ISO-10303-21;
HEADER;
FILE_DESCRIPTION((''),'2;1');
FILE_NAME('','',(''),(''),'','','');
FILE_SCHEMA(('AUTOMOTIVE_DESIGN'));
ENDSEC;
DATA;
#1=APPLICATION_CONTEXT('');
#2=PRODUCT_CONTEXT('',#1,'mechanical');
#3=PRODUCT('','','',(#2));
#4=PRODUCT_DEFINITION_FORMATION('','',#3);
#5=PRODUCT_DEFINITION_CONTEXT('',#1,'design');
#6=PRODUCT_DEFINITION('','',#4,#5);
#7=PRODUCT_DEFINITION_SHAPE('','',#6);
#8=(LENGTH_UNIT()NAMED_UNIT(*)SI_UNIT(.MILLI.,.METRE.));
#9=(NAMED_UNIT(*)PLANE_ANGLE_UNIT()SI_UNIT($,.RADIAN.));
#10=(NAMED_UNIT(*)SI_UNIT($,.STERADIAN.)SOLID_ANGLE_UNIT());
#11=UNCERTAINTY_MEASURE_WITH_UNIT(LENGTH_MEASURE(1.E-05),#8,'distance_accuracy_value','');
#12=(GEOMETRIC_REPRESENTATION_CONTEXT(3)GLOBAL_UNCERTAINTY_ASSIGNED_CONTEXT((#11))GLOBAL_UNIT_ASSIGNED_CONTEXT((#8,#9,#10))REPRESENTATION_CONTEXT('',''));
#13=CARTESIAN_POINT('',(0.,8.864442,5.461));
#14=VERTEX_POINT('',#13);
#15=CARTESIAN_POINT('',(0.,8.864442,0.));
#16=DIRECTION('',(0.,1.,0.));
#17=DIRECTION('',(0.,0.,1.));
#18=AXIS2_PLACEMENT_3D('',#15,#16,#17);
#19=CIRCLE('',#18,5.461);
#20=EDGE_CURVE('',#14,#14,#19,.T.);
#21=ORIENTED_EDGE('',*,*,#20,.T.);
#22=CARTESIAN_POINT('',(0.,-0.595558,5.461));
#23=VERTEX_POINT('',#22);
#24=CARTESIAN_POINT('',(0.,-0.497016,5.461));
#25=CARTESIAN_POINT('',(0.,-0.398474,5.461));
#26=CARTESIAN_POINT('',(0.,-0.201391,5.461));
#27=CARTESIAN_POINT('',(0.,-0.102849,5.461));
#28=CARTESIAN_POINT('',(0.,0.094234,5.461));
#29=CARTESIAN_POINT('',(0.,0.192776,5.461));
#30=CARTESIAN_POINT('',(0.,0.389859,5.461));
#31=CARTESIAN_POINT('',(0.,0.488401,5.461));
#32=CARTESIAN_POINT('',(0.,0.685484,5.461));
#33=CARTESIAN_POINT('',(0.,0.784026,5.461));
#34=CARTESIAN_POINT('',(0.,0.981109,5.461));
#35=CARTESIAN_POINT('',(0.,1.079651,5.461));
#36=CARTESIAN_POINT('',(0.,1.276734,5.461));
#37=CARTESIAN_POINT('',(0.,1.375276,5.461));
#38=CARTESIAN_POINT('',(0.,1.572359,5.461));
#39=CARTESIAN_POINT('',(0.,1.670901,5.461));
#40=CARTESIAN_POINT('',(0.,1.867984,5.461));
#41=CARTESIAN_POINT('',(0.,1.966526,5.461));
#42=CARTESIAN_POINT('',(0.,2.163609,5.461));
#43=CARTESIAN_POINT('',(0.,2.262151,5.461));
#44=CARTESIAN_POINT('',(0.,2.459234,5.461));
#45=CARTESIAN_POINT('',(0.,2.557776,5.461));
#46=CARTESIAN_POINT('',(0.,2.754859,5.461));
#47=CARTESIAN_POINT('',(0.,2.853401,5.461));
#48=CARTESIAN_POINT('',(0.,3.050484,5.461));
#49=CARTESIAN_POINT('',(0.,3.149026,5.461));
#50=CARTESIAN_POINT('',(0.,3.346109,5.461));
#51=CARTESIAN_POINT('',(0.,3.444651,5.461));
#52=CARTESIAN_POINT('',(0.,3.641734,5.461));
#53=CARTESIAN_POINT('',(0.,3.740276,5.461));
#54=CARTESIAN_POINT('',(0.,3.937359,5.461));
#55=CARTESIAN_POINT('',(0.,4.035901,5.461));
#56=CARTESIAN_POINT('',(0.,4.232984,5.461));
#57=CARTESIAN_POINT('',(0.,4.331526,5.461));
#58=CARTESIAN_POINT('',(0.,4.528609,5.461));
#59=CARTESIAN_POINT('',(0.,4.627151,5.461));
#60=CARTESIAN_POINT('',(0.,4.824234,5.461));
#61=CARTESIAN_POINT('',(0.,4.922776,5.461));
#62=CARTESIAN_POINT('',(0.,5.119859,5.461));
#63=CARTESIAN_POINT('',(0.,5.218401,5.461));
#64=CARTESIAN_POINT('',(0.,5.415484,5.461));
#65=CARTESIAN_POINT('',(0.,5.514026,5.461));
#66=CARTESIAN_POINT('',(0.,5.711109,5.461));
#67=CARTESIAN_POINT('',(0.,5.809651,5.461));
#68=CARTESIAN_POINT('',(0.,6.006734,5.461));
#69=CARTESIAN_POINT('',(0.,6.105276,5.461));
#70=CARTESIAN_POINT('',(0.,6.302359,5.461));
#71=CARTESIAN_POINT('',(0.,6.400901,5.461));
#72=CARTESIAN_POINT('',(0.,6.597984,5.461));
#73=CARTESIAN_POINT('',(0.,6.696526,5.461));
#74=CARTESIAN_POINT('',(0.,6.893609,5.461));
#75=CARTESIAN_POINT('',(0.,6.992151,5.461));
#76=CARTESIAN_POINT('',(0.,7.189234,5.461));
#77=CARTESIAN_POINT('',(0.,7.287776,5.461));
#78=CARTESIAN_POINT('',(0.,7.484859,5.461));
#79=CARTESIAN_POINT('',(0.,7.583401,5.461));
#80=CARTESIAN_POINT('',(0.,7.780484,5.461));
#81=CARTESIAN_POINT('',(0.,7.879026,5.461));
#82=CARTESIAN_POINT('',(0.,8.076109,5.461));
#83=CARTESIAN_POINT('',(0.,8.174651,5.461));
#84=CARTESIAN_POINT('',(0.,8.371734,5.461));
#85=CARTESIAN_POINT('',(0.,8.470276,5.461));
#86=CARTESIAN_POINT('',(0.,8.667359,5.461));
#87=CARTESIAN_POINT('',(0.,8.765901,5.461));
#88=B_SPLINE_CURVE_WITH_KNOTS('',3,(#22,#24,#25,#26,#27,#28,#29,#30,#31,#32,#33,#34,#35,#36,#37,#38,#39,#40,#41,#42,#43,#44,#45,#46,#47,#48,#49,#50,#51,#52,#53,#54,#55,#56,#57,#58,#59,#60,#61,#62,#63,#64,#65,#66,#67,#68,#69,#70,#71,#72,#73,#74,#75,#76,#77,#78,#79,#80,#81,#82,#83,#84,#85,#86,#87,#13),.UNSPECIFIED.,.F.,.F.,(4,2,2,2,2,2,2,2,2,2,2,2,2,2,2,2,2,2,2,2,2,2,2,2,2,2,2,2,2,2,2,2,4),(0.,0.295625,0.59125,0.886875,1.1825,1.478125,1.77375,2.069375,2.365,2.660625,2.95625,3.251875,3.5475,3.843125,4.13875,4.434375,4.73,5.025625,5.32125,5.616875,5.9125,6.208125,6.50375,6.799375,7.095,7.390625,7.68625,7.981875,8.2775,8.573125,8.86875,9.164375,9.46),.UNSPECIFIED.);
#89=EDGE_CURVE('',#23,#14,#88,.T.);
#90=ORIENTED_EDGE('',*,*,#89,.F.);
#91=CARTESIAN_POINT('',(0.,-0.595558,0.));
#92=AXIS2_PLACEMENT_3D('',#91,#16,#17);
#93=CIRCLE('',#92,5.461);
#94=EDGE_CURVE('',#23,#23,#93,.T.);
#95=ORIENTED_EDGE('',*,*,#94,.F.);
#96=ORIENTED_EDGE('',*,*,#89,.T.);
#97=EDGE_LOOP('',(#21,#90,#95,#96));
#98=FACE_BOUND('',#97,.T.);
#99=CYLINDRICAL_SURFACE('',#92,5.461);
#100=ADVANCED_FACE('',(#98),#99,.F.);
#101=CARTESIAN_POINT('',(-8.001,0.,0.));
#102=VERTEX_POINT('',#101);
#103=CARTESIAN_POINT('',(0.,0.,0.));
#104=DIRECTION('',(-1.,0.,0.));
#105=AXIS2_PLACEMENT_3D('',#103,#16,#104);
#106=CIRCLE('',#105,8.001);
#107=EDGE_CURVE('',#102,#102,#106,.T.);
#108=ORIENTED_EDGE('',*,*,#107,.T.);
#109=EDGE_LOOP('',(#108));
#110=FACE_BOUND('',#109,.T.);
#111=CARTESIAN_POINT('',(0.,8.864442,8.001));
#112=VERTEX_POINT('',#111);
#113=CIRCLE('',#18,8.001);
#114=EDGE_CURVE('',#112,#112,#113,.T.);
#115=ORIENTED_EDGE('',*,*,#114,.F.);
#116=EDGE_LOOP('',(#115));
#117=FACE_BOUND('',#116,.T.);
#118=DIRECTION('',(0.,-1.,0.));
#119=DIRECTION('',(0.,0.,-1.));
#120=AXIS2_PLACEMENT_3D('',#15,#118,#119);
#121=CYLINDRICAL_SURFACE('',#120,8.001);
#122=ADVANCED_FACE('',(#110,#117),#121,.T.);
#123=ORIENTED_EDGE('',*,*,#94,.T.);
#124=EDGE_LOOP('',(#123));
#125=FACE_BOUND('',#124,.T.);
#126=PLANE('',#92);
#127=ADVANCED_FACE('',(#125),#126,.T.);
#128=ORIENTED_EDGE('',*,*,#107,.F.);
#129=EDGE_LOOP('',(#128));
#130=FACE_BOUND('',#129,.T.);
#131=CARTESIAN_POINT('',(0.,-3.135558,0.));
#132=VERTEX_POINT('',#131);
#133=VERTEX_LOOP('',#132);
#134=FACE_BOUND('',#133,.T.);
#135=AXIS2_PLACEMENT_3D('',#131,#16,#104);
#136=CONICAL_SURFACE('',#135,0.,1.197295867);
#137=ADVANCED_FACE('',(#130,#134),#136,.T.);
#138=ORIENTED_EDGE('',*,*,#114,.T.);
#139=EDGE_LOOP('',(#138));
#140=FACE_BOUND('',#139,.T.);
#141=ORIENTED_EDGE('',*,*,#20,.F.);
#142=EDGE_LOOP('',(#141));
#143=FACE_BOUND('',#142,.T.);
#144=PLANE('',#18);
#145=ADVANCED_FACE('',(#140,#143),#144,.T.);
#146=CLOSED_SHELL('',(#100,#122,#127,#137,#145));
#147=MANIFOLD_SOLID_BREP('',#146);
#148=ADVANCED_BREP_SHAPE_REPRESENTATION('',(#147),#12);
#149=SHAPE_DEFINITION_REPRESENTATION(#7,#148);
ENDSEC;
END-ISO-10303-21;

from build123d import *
from OCP.BRepAlgoAPI import BRepAlgoAPI_Cut
from OCP.TopTools import TopTools_ListOfShape

# Parameters (mm, degrees)
SKETCH1_R           = 8.001
SKETCH1_R_2         = 5.461
BOSS_EXTRUDE1_DEPTH = 8.864442387
CUT_EXTRUDE1_START  = 8.864442
SKETCH1_6_R         = 5.461
CUT_EXTRUDE1_DEPTH  = 9.46


with BuildPart() as part:
    # Sketch1 → Boss-Extrude1 (new body)
    # profile 1 of 2: a face of its own
    with BuildSketch(Plane(origin=(0, 0, 0), x_dir=(1, 0, 0), z_dir=(0, 1, 0))):
        with Locations(Location((0, 0, 0), (0, 0, 270))):
            Circle(SKETCH1_R)
        Circle(SKETCH1_R_2, mode=Mode.SUBTRACT)
    # profile 2 of 2: a face of its own
    with BuildSketch(Plane(origin=(0, 0, 0), x_dir=(1, 0, 0), z_dir=(0, 1, 0))):
        Circle(SKETCH1_R_2)
    extrude(amount=BOSS_EXTRUDE1_DEPTH)

    # Sketch2 → Revolve1 (revolve)
    with BuildSketch(Plane.XY, mode=Mode.PRIVATE) as revolve1_sk:
        Polygon((0, 0), (0, -3.135557613), (8.001, 0), align=None)
    revolve(revolve1_sk.sketch.rotate(Axis((0, 0, 0), (0, -1, 0)), 180), axis=Axis((0, 0, 0), (0, -1, 0)))


with BuildPart() as cut_extrude1_tool:
    # Sketch1<6> → Cut-Extrude1 (new body)
    with BuildSketch(Plane(origin=(0, 0, 0), x_dir=(1, 0, 0), z_dir=(0, 1, 0)).offset(CUT_EXTRUDE1_START)):
        with Locations(Location((0, 0, 0), (0, 0, 270))):
            Circle(SKETCH1_6_R)
    extrude(amount=-CUT_EXTRUDE1_DEPTH)


with BuildPart() as part_1:
    add(part.part)

    # Cut-Extrude1: cut by cut_extrude1_tool, with a tolerance
    cut_extrude1_stock = TopTools_ListOfShape()
    cut_extrude1_stock.Append(part_1.part.wrapped)
    cut_extrude1_tools = TopTools_ListOfShape()
    cut_extrude1_tools.Append(cut_extrude1_tool.part.wrapped)
    cut_extrude1_cut = BRepAlgoAPI_Cut()
    cut_extrude1_cut.SetArguments(cut_extrude1_stock)
    cut_extrude1_cut.SetTools(cut_extrude1_tools)
    cut_extrude1_cut.SetFuzzyValue(0.00001)
    cut_extrude1_cut.Build()
    add(Compound.cast(cut_extrude1_cut.Shape()).solids(), mode=Mode.REPLACE)


solid = part_1.part
